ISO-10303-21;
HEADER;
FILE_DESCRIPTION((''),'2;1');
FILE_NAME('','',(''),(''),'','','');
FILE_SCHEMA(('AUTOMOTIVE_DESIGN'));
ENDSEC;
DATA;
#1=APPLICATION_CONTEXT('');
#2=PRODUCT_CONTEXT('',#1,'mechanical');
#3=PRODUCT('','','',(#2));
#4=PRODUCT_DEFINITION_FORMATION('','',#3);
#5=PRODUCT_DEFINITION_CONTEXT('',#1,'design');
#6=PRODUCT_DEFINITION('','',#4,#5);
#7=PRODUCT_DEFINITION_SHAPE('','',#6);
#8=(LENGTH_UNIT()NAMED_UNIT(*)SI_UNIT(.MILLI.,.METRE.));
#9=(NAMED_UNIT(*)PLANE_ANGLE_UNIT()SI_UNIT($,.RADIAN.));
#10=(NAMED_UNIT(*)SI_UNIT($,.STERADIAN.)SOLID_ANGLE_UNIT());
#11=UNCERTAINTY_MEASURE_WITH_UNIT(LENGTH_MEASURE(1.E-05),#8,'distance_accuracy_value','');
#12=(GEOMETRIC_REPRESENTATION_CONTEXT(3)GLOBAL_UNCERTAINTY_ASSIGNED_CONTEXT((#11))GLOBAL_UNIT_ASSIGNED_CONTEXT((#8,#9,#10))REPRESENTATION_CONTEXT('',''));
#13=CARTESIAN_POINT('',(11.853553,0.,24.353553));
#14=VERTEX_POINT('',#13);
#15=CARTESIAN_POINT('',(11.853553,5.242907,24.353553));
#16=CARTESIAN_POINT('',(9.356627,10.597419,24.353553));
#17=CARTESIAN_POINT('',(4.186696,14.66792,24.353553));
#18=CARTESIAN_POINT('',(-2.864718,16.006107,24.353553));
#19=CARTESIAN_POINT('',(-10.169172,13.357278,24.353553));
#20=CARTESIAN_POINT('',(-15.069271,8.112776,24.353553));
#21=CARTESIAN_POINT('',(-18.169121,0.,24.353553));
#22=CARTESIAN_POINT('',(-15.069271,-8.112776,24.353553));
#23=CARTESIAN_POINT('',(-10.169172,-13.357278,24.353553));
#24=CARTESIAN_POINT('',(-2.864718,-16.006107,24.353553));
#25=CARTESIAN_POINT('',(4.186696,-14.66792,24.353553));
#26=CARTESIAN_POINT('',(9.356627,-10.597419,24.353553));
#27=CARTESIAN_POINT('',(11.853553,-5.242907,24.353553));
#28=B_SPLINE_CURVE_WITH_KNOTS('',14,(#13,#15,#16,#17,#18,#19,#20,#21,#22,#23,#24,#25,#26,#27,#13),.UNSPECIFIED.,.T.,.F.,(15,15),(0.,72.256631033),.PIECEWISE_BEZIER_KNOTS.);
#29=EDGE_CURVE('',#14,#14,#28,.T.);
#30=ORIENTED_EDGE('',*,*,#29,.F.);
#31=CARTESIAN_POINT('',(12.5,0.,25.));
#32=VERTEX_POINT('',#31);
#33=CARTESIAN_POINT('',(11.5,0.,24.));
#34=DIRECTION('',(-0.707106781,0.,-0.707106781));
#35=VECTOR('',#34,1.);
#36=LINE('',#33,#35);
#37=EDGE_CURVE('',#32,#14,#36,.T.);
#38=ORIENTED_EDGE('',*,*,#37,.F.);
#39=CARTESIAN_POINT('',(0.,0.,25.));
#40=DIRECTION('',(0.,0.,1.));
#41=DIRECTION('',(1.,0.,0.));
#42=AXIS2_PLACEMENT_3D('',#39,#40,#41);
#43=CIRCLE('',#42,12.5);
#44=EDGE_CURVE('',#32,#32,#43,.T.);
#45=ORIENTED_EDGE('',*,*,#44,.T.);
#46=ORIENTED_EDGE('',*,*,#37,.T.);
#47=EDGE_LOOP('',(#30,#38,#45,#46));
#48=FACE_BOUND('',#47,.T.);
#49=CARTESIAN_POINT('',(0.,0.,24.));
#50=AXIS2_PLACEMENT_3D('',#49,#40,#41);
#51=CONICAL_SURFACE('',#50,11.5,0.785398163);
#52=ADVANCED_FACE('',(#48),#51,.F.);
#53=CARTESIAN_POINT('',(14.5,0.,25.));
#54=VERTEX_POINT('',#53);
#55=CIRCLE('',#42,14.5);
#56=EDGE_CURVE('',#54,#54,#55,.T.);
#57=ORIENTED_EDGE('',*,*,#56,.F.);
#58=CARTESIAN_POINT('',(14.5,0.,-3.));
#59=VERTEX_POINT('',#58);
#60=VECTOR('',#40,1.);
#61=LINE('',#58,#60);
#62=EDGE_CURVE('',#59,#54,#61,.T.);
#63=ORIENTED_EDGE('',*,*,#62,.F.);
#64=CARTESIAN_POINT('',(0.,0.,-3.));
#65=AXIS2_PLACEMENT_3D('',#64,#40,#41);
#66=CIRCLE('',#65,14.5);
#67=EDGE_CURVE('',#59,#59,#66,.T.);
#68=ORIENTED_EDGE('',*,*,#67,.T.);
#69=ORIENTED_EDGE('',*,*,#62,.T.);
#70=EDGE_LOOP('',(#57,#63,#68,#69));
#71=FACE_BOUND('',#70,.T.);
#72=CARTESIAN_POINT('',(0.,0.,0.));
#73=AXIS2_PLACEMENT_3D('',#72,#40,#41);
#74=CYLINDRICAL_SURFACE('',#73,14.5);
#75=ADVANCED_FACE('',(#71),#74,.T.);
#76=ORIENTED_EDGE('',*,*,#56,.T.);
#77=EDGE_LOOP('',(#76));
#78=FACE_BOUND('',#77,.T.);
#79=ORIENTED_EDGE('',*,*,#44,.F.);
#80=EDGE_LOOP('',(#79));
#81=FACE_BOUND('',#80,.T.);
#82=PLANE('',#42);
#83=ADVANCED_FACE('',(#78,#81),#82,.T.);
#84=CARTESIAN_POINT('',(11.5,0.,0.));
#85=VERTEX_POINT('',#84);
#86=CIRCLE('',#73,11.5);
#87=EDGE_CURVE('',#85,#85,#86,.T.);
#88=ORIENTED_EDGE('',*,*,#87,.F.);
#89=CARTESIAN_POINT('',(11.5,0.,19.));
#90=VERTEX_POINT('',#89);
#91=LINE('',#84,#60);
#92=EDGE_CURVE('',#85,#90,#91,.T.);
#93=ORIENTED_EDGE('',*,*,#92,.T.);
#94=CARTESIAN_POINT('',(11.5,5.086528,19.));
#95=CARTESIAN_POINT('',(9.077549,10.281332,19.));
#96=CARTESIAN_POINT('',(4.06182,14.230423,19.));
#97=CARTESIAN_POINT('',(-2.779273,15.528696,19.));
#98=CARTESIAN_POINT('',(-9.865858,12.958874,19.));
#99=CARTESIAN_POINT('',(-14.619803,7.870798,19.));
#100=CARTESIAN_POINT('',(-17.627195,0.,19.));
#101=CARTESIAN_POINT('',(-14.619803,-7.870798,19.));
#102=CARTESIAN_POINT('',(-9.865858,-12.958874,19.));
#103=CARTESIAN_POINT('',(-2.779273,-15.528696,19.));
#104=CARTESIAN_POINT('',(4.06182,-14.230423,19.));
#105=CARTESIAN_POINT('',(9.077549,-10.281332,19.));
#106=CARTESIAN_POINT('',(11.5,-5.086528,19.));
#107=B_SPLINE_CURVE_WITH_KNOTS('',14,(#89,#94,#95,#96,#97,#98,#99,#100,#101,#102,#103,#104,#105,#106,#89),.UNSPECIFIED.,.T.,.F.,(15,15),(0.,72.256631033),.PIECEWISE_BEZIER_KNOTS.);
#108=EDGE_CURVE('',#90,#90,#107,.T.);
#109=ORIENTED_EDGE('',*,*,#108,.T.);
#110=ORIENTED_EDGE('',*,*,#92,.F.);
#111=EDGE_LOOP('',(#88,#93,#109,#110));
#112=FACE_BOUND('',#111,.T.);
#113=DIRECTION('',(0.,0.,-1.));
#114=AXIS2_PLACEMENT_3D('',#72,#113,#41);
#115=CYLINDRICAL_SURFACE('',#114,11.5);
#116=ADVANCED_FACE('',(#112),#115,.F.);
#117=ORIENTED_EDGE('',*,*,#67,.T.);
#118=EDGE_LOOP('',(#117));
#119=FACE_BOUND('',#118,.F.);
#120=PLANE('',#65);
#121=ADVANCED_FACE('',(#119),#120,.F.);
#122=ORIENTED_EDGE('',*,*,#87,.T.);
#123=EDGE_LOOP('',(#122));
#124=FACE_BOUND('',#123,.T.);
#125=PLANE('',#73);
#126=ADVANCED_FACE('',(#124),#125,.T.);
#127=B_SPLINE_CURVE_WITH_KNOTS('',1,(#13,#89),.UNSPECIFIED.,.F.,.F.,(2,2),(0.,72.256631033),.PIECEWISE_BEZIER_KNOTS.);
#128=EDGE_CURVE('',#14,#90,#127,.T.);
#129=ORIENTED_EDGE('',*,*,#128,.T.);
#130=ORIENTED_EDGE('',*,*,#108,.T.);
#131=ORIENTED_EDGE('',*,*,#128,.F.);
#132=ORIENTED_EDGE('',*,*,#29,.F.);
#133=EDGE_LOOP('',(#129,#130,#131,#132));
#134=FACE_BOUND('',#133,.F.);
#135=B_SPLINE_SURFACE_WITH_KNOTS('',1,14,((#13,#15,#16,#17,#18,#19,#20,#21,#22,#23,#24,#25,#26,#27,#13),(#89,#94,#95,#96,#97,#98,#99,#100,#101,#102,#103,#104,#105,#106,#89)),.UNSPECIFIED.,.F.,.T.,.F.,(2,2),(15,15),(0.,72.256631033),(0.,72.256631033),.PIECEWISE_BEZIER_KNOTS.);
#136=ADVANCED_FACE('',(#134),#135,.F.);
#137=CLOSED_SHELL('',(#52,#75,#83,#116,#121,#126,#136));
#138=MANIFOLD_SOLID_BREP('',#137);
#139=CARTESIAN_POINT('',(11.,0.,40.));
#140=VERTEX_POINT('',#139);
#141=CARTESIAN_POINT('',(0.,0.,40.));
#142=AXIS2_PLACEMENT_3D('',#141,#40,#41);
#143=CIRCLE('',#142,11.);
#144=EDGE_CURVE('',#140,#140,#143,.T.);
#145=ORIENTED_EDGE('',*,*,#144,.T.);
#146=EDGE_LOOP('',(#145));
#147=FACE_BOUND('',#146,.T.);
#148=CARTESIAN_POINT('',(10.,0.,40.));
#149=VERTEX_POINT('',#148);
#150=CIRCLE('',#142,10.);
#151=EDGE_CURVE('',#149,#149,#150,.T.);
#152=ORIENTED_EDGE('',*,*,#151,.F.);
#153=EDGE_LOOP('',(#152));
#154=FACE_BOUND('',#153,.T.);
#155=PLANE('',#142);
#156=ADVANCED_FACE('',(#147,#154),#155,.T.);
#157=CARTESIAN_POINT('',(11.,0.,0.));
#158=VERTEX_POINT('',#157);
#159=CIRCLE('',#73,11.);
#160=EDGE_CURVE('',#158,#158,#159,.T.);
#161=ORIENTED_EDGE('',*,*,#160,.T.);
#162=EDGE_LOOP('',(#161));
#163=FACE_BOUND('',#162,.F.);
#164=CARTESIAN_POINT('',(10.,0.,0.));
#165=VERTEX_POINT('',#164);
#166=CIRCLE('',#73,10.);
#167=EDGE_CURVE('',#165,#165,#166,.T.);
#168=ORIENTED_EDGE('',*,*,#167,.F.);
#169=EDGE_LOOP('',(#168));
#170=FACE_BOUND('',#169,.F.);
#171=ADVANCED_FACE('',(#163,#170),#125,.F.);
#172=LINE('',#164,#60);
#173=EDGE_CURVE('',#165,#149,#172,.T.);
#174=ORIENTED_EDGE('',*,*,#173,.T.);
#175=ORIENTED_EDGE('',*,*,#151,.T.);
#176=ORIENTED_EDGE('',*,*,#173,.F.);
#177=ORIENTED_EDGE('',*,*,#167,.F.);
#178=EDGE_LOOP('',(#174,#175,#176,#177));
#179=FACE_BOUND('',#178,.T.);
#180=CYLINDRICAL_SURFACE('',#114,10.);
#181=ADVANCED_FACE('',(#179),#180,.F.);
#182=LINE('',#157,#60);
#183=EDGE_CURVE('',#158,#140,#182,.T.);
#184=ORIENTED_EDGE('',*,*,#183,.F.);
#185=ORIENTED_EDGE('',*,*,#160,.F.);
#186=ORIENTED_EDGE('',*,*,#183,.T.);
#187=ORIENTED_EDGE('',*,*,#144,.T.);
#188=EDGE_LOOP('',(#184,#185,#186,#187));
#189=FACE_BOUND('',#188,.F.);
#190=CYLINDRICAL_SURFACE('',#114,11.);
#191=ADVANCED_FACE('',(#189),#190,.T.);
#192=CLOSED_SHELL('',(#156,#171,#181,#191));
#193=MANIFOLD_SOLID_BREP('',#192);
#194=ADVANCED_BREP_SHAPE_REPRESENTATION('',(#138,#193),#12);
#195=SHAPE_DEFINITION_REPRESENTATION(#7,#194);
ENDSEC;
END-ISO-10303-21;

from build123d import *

# Parameters (mm, degrees)
F0_R     = 11
F0_R_2   = 10
F1_DEPTH = 40
F2_R     = 14.5
F2_R_2   = 11.5
F3_DEPTH = 25
F4_R     = 14.5
F5_DEPTH = 3
F6_SIZE  = 1
F7_SIZE2 = 5
F7_SIZE  = 0.5


with BuildPart() as f1:
    # F0 (on Top) → F1 (new body)
    with BuildSketch(Plane.XY):
        Circle(F0_R)
        Circle(F0_R_2, mode=Mode.SUBTRACT)
    extrude(amount=F1_DEPTH)


with BuildPart() as f3:
    # F2 (on Top) → F3 (new body)
    with BuildSketch(Plane.XY):
        Circle(F2_R)
        Circle(F2_R_2, mode=Mode.SUBTRACT)
    extrude(amount=F3_DEPTH)

    # F4 (on Top) → F5 (join)
    with BuildSketch(Plane.XY):
        Circle(F4_R)
    extrude(amount=-F5_DEPTH)

    # F6
    f6_edges = [f3.edges().sort_by_distance(p)[0] for p in [
        (-11.5, 0, 25),
    ]]
    chamfer(f6_edges, length=F6_SIZE)

    # F7
    f7_edges = [f3.edges().sort_by_distance(p)[0] for p in [
        (-11.5, 0, 24),
    ]]
    chamfer(f7_edges, length=F7_SIZE, length2=F7_SIZE2)


solid = Compound([f1.part, f3.part])
